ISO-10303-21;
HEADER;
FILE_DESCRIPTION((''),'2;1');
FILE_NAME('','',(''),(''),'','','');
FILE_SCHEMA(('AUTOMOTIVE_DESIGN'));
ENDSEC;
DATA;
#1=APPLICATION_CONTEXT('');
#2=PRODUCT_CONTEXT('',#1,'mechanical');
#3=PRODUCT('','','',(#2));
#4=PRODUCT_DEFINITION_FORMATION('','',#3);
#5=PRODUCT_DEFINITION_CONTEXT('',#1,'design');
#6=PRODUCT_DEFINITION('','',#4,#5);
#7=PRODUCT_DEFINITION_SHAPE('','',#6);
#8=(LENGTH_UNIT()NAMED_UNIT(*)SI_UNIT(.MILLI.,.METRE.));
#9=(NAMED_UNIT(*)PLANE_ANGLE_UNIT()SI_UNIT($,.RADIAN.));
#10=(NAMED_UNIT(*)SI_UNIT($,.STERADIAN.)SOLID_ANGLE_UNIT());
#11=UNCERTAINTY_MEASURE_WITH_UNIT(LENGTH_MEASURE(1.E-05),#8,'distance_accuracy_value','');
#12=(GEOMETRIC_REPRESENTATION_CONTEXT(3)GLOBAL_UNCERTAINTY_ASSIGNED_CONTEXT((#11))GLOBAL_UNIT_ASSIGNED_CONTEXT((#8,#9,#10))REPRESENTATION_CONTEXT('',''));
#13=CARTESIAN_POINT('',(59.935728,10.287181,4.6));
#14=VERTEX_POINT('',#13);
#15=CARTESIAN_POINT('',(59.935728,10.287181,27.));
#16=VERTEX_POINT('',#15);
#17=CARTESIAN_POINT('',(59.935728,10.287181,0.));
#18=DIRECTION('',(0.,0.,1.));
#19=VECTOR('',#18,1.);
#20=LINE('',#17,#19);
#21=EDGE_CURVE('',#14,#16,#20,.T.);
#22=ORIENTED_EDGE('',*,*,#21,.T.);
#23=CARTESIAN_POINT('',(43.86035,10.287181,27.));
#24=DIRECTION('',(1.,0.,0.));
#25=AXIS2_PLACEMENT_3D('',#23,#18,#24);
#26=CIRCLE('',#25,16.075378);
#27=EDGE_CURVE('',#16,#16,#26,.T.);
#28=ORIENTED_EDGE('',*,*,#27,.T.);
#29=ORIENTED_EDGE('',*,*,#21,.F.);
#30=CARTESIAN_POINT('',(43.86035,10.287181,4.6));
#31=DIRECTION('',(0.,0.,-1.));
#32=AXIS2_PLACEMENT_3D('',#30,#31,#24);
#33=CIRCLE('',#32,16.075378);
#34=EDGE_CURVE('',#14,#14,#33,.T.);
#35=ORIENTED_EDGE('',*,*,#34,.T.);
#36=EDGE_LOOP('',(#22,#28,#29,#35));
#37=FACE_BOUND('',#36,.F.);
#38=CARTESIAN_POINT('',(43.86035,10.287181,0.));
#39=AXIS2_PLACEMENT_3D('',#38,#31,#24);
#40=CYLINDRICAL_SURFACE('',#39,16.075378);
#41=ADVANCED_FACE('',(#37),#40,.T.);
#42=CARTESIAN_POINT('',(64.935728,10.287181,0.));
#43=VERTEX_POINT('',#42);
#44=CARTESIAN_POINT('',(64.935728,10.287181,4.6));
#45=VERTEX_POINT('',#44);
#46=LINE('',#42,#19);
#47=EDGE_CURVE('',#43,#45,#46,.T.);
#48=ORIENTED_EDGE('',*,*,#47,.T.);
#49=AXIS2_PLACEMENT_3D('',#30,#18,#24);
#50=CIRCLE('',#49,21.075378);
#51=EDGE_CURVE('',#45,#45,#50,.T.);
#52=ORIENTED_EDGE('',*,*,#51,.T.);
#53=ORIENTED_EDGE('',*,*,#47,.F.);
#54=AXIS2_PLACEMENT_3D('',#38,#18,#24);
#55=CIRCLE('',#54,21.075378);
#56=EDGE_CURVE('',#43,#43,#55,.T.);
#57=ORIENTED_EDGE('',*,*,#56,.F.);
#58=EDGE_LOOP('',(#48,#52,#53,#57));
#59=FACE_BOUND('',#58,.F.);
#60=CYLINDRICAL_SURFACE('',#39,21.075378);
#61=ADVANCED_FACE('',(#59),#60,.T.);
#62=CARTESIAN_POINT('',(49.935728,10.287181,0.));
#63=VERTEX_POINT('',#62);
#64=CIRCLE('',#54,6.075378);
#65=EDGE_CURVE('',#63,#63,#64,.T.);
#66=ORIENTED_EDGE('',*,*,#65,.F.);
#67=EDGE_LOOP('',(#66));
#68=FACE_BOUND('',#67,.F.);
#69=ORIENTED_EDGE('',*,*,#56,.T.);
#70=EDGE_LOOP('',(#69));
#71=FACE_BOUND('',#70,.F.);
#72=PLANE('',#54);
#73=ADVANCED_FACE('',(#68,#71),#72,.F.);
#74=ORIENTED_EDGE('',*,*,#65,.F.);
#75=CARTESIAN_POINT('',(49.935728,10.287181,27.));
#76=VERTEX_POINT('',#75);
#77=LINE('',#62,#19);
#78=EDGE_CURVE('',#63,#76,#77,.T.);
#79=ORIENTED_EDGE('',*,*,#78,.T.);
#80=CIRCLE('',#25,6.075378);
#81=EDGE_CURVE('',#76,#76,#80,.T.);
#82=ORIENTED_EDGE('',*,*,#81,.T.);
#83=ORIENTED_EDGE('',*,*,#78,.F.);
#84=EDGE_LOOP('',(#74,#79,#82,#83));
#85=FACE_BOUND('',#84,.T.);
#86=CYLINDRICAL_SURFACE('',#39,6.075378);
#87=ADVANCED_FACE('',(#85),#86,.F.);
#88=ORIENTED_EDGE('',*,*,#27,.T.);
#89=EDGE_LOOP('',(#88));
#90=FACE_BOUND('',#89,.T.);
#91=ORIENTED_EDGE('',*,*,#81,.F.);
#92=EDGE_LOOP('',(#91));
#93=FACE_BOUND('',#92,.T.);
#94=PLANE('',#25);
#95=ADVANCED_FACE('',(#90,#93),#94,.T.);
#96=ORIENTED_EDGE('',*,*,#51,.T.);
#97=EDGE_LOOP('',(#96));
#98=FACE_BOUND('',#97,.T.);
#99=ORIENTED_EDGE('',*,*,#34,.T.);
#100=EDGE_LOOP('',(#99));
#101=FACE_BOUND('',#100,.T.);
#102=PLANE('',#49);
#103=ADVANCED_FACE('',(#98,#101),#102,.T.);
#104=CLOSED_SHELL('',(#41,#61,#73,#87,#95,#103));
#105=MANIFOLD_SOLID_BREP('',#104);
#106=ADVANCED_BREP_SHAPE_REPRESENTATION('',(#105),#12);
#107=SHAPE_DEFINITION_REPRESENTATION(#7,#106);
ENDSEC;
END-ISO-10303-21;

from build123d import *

# Parameters (mm, degrees)
F0_R     = 21.0753784255
F0_R_2   = 16.0753784255
F0_R_3   = 6.0753784255
F1_DEPTH = 4.6
F2_DEPTH = 27


# Not quite as in the source:
# - a feature of the source that left no trace in its solid (it failed there, or was rolled back) is left out


with BuildPart() as f1:
    # F0 (on Top) → F1 (new body)
    with BuildSketch(Plane.XY):
        with Locations((43.8603498042, 10.2871814743)):
            Circle(F0_R)
        with Locations((43.8603498042, 10.2871814743)):
            Circle(F0_R_2, mode=Mode.SUBTRACT)
        with Locations((43.8603498042, 10.2871814743)):
            Circle(F0_R_2)
        with Locations((43.8603498042, 10.2871814743)):
            Circle(F0_R_3, mode=Mode.SUBTRACT)
    extrude(amount=F1_DEPTH)

    # F0 (on Top) → F2 (join)
    with BuildSketch(Plane.XY):
        with Locations((43.8603498042, 10.2871814743)):
            Circle(F0_R_2)
        with Locations((43.8603498042, 10.2871814743)):
            Circle(F0_R_3, mode=Mode.SUBTRACT)
    extrude(amount=F2_DEPTH)


solid = f1.part
